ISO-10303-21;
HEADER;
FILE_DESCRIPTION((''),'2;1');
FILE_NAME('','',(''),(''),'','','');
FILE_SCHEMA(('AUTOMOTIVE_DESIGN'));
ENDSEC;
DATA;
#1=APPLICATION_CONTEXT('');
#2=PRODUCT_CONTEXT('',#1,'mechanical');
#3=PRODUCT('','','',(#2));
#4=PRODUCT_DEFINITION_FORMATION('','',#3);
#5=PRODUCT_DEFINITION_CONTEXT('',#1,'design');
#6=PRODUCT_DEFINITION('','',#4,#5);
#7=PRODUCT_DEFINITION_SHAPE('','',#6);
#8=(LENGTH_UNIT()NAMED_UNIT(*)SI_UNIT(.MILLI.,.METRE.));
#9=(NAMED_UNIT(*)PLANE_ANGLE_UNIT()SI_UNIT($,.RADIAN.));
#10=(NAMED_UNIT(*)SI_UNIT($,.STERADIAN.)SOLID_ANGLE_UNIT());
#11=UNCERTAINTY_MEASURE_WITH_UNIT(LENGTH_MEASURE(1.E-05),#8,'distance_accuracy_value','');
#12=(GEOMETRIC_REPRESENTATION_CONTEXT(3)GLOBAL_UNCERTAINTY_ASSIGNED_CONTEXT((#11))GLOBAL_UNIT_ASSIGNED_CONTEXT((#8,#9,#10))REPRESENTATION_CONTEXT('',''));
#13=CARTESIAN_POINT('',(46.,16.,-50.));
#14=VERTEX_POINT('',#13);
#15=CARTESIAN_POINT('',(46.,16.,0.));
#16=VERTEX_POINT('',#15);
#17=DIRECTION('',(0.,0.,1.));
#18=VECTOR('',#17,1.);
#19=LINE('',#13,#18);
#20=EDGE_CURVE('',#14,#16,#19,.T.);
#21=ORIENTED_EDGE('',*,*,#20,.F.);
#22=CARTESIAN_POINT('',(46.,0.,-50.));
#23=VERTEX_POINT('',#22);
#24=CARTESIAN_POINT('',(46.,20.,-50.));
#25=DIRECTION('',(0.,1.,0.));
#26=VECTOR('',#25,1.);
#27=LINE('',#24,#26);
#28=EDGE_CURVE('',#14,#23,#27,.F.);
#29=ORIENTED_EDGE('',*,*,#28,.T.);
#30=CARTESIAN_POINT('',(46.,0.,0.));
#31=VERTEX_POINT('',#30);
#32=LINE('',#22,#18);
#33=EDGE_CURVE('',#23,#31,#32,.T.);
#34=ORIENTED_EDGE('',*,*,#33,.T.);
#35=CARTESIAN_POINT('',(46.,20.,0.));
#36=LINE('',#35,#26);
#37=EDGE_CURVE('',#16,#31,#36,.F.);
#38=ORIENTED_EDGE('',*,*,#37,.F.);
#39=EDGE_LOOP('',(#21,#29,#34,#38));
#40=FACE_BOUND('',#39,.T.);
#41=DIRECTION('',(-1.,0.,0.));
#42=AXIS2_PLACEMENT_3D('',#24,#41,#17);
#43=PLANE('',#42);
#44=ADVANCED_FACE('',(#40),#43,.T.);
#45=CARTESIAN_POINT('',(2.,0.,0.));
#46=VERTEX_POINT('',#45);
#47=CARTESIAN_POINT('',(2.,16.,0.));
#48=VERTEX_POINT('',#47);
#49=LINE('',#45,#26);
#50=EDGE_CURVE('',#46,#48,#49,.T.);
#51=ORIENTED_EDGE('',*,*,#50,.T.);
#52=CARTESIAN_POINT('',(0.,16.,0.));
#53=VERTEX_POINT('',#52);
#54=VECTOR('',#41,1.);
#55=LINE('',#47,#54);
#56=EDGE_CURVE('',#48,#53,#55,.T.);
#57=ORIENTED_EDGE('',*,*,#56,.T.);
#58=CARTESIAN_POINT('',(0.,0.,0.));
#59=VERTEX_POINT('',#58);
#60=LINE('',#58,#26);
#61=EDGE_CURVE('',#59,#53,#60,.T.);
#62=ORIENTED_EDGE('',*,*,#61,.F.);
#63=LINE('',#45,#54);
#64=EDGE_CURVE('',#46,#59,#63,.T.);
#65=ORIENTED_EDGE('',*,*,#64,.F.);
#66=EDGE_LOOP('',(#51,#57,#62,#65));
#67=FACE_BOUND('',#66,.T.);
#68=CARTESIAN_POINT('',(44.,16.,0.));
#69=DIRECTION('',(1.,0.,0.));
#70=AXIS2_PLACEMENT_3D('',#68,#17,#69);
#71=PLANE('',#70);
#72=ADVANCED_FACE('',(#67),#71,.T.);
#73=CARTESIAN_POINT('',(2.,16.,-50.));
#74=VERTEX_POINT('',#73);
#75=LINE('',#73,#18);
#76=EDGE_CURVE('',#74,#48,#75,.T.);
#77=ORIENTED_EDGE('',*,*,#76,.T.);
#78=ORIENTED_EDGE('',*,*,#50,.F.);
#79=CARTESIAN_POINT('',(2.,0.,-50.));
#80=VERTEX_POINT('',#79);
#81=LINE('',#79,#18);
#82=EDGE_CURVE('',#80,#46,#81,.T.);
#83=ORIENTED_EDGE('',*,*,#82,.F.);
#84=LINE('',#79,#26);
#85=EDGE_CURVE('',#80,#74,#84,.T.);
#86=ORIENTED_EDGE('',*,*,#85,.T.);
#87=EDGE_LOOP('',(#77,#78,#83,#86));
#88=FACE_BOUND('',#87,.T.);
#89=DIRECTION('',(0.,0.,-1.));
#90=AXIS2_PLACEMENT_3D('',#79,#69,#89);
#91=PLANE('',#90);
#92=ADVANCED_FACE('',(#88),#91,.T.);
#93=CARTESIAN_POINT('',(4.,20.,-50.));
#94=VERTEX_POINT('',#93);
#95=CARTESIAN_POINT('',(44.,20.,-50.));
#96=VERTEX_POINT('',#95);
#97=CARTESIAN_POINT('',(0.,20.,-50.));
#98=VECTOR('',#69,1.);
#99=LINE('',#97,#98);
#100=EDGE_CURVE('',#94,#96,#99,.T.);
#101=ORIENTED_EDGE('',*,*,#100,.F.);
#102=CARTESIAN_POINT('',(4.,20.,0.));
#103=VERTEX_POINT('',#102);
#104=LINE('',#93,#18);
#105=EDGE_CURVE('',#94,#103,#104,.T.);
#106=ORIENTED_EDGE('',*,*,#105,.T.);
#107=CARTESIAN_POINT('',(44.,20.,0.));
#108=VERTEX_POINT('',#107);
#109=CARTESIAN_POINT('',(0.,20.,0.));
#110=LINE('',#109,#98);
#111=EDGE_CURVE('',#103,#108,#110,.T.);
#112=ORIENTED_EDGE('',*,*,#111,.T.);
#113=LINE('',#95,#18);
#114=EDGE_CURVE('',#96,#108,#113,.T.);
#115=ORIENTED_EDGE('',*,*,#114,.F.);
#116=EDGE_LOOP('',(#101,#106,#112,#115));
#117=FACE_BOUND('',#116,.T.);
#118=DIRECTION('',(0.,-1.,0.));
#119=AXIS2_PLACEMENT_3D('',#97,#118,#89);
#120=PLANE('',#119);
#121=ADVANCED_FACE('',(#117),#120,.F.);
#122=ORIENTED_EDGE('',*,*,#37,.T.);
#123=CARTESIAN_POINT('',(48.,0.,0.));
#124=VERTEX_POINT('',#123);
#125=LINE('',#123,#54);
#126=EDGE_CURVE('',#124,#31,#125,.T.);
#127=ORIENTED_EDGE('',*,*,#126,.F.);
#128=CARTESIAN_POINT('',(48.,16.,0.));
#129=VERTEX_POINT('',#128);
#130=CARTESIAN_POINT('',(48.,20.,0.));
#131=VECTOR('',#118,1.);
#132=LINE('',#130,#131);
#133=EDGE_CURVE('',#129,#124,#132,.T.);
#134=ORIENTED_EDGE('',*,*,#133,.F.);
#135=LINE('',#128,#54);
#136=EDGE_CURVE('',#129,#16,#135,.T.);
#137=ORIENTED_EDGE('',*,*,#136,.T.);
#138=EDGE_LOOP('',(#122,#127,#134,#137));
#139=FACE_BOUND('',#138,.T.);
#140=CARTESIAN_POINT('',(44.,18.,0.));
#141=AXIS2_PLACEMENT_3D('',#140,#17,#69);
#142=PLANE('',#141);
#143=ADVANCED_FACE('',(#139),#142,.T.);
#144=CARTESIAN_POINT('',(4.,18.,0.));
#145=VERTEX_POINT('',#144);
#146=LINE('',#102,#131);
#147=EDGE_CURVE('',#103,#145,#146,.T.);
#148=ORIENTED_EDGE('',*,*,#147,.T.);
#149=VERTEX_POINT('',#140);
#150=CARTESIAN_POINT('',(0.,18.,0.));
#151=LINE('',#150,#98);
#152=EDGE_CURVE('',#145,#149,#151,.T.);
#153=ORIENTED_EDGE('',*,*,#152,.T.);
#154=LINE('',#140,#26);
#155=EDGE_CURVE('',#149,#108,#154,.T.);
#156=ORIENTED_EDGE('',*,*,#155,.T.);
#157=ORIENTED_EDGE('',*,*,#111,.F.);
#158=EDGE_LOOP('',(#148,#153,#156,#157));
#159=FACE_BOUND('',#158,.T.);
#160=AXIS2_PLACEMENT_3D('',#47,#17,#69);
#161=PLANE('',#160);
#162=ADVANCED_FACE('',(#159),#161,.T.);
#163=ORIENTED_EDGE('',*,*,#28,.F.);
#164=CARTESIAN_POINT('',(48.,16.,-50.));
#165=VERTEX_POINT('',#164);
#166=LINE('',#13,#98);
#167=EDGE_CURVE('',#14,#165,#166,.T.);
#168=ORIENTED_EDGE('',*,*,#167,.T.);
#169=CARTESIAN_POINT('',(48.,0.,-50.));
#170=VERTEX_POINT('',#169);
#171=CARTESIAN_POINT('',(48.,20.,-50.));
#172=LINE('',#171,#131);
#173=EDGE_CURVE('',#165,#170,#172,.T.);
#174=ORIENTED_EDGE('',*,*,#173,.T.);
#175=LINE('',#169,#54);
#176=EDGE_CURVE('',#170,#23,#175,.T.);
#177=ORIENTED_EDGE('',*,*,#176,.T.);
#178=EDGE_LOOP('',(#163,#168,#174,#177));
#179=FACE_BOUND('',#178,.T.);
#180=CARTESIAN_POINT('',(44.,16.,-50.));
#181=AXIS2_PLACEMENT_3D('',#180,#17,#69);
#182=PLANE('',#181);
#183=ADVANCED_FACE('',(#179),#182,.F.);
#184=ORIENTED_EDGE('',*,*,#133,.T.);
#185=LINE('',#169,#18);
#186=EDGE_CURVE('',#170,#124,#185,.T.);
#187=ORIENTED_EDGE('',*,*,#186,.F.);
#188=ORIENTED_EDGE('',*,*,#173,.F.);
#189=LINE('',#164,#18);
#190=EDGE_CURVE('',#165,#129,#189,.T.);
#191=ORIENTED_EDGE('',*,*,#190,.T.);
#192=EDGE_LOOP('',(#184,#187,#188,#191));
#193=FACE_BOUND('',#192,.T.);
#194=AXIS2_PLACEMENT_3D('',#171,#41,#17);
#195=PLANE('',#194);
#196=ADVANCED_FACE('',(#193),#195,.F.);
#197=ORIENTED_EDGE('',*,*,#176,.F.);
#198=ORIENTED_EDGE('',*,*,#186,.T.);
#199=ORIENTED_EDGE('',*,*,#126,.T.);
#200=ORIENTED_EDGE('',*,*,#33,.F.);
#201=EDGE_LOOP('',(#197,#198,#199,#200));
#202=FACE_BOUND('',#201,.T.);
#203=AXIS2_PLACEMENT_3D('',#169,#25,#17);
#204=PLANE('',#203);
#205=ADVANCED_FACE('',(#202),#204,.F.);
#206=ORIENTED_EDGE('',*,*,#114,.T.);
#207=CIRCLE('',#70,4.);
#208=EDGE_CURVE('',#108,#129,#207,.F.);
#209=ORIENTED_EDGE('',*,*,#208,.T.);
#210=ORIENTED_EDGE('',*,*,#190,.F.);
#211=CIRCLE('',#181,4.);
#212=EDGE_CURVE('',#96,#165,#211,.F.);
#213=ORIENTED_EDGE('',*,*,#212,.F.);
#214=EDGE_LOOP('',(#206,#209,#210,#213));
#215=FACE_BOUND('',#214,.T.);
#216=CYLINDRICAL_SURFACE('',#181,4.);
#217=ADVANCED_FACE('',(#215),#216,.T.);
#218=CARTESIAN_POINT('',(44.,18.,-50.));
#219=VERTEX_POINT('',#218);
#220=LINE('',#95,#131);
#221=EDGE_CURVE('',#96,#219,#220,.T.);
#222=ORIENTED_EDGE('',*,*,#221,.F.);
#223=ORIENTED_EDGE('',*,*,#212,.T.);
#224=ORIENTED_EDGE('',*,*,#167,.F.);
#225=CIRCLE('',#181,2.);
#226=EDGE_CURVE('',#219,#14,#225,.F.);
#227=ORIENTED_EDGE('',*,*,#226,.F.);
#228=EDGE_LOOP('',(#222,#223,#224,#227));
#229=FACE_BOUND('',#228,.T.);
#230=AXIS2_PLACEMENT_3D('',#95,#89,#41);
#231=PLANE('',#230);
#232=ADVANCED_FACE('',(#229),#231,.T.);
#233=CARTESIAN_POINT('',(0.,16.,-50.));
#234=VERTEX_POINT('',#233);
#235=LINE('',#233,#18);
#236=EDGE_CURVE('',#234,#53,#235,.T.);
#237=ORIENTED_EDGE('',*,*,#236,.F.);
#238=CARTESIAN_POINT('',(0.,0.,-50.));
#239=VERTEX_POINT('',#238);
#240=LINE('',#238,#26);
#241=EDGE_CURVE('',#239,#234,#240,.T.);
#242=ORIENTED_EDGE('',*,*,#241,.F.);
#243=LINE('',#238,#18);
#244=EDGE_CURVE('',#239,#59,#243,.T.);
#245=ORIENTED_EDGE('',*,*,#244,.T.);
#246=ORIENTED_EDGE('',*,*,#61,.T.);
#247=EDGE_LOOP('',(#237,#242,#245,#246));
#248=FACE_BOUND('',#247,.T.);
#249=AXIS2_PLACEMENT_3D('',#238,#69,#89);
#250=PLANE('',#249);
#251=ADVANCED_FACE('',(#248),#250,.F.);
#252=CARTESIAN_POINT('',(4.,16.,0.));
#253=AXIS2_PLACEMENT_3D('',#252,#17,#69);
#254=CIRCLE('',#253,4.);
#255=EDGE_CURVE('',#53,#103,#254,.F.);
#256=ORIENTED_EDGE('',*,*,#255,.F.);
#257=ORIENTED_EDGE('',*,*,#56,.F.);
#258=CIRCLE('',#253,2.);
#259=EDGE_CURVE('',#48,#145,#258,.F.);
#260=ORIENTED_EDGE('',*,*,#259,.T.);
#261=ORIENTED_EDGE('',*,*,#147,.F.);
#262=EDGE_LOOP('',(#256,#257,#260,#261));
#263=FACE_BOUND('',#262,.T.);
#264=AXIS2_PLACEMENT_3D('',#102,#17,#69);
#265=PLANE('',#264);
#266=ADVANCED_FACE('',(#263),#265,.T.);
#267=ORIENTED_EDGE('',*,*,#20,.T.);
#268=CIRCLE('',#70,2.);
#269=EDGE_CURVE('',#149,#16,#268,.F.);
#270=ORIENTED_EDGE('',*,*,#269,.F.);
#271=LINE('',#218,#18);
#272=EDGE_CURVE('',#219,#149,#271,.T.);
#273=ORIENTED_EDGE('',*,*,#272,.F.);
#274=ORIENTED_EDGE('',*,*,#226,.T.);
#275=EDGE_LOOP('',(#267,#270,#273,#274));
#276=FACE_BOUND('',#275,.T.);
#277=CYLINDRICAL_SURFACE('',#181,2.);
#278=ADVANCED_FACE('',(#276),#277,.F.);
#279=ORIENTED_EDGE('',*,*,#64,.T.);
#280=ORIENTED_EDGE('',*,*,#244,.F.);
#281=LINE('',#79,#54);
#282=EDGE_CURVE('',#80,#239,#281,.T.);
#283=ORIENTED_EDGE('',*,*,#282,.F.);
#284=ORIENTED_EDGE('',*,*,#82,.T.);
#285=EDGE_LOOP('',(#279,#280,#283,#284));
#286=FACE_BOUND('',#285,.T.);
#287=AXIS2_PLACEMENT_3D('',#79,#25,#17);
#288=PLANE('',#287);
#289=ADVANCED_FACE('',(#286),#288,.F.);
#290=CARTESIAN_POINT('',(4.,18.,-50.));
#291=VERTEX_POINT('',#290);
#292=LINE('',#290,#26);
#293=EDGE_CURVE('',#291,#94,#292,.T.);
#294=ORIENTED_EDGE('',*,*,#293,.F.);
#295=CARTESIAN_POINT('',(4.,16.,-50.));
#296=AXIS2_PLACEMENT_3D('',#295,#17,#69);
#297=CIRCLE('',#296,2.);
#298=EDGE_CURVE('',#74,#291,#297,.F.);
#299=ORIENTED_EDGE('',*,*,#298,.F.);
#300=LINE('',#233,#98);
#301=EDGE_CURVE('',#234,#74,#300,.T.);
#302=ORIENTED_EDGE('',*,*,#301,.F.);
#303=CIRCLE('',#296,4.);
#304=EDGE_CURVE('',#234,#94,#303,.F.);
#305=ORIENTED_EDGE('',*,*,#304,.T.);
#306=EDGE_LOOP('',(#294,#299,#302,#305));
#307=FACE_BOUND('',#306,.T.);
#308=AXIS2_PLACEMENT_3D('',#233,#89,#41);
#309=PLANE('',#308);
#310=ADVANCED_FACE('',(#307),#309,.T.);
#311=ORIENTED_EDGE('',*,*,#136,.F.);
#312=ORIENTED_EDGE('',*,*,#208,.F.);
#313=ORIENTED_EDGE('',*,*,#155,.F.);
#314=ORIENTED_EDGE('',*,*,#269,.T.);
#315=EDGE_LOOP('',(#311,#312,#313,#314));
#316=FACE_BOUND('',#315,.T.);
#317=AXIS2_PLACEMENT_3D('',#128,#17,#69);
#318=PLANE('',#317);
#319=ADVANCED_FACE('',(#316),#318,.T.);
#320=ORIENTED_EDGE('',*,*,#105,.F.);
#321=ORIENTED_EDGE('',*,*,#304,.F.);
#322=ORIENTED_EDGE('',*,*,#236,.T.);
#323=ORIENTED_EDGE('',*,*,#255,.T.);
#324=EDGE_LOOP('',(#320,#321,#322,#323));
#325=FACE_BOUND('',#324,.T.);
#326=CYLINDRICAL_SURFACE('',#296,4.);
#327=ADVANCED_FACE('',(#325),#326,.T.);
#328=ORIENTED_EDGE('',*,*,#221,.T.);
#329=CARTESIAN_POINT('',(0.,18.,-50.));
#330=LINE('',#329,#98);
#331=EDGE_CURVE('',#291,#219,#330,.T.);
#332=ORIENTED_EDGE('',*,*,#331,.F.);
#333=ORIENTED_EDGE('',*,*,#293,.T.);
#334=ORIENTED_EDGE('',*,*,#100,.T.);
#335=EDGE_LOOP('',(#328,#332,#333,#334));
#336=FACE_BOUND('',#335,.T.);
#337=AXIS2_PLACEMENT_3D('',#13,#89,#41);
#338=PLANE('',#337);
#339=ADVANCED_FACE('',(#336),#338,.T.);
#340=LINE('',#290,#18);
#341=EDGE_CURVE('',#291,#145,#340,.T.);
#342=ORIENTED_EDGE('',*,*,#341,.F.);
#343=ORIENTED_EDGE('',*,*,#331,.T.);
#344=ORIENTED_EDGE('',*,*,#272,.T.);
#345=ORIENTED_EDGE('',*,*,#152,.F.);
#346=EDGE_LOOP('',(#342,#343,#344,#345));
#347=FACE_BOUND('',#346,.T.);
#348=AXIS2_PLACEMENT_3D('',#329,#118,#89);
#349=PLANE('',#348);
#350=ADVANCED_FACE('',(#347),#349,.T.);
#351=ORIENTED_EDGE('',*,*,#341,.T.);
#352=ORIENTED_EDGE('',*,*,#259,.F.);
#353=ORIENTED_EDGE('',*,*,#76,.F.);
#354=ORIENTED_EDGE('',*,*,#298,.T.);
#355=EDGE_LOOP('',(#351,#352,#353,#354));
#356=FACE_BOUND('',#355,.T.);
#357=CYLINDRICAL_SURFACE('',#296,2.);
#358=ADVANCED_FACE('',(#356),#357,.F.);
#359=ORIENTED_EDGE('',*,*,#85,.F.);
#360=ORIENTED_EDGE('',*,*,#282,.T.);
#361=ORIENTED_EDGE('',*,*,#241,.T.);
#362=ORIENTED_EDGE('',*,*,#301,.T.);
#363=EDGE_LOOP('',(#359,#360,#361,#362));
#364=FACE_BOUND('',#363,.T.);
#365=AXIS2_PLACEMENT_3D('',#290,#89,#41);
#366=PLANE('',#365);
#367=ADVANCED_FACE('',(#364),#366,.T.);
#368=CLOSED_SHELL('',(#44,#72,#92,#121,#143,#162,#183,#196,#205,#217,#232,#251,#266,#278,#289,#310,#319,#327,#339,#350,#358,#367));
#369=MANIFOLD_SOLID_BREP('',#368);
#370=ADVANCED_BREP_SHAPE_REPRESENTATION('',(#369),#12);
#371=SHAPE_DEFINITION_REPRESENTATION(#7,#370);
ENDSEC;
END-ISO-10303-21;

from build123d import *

# Parameters (mm, degrees)
SM_BASE_FLANGE_1_DEPTH = 50


# Sheet-metal steps are written as plain solids
with BuildPart() as part:
    # Sketch 1 → Базовая кромка1 (new body)
    with BuildSketch(Plane.XY):
        with BuildLine():
            Line((0, 0), (0, 16))
            ThreePointArc((0, 16), (1.171572875, 18.828427125), (4, 20))
            Line((4, 20), (44, 20))
            ThreePointArc((44, 20), (46.828427125, 18.828427125), (48, 16))
            Line((48, 16), (48, 0))
            Line((48, 0), (46, 0))
            Line((46, 0), (46, 16))
            ThreePointArc((46, 16), (45.414213562, 17.414213562), (44, 18))
            Line((44, 18), (4, 18))
            ThreePointArc((4, 18), (2.585786438, 17.414213562), (2, 16))
            Line((2, 16), (2, 0))
            Line((2, 0), (0, 0))
        make_face()
    extrude(amount=-SM_BASE_FLANGE_1_DEPTH)


solid = part.part
